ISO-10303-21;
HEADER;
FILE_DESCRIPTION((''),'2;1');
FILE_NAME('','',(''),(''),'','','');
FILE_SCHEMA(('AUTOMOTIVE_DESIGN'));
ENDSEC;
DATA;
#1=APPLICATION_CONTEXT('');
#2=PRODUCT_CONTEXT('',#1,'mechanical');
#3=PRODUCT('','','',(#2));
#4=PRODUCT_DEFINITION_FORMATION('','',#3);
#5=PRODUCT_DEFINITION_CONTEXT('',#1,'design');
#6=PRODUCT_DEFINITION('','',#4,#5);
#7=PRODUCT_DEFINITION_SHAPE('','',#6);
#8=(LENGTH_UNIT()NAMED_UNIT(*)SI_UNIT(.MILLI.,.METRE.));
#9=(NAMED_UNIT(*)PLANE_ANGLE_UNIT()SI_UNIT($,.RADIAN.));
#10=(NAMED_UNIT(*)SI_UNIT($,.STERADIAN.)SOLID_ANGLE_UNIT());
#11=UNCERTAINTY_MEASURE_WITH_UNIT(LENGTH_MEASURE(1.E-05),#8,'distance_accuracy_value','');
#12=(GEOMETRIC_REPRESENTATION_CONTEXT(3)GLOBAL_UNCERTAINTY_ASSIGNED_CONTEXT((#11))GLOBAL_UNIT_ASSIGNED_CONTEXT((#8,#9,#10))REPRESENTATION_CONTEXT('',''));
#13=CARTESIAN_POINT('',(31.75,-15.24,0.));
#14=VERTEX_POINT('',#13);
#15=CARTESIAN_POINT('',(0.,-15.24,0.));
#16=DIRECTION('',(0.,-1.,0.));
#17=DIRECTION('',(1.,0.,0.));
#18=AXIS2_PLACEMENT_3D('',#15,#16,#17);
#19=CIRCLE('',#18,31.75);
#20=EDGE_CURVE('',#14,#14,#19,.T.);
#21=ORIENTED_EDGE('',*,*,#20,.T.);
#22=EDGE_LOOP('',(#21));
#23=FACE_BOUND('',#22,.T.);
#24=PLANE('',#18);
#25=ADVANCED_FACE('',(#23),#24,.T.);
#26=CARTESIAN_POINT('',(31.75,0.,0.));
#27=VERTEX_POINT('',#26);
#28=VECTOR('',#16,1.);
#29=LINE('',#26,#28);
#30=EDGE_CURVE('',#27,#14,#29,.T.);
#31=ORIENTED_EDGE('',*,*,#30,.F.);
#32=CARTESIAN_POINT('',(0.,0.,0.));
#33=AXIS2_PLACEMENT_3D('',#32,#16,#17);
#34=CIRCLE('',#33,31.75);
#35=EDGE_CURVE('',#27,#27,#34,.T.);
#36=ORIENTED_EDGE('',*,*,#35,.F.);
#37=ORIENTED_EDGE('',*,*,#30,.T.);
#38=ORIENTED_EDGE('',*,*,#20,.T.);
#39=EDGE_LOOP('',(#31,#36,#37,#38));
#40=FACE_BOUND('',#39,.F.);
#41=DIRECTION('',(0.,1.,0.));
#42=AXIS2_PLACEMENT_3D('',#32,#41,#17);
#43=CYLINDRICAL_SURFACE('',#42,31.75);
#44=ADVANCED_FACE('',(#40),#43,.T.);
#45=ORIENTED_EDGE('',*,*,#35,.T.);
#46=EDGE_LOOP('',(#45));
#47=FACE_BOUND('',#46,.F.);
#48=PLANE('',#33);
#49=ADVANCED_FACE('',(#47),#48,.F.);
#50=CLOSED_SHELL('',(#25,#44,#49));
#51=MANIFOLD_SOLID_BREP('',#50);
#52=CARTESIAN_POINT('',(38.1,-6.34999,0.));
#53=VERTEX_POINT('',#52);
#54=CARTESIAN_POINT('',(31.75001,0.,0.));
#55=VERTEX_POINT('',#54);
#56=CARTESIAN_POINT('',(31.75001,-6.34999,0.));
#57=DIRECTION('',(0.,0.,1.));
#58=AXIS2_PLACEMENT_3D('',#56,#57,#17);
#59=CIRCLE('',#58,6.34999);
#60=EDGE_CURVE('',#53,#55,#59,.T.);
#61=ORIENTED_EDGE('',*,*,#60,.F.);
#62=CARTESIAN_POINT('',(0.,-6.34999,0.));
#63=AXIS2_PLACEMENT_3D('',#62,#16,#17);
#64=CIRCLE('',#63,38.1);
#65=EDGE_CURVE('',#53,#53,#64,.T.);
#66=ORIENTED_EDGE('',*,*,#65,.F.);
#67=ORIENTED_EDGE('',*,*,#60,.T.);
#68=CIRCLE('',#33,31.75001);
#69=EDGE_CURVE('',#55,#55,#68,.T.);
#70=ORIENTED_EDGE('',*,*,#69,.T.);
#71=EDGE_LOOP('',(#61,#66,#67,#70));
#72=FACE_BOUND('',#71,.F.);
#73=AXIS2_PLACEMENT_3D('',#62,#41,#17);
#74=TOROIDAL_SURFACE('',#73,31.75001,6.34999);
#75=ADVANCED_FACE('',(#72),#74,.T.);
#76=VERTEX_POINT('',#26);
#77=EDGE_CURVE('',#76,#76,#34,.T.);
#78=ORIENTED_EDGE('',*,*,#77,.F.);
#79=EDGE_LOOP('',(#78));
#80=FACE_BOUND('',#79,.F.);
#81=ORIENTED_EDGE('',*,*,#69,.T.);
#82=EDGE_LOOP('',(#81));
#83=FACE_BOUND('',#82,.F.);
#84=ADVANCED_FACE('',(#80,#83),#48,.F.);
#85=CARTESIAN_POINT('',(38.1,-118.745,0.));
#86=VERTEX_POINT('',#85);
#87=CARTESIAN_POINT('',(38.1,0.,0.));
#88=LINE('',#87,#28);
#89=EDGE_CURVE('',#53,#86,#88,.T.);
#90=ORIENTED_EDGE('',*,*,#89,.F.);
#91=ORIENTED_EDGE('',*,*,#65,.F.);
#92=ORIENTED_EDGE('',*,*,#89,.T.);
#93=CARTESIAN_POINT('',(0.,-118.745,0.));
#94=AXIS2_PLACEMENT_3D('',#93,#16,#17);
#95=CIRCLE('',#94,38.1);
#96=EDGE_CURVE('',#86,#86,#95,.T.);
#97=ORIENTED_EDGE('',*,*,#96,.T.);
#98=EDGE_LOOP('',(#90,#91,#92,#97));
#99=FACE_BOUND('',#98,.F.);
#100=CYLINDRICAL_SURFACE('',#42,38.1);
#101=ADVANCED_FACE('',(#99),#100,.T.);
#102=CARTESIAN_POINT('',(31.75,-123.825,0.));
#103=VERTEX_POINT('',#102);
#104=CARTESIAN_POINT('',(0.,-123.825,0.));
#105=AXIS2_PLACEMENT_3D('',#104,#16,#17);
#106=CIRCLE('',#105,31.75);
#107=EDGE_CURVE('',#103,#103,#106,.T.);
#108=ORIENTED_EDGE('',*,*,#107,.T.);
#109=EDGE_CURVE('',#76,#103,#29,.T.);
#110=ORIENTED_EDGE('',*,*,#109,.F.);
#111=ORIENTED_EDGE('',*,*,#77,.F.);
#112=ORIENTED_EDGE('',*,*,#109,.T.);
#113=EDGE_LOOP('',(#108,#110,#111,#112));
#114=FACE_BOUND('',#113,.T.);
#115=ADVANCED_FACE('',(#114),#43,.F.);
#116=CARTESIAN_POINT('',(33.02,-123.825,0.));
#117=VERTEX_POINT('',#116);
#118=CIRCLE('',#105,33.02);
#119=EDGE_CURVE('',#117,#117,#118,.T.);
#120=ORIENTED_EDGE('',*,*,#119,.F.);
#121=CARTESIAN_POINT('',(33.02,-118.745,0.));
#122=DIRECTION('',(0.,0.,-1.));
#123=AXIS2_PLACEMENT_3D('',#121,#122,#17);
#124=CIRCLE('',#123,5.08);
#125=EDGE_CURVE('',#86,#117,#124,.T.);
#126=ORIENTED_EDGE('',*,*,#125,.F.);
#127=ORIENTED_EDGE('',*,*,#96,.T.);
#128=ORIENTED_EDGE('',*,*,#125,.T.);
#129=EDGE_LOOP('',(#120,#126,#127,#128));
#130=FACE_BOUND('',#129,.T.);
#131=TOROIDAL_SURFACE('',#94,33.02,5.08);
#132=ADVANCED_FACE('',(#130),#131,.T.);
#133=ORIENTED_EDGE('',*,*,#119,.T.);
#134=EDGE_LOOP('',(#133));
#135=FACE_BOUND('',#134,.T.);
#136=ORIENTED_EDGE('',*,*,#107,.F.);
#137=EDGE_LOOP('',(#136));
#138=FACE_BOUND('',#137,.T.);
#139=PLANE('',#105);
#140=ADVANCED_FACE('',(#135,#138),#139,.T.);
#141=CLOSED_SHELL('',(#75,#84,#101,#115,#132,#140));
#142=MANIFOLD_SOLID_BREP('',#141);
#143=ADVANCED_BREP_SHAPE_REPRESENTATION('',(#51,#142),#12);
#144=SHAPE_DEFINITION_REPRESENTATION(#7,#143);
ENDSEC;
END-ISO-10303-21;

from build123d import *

# Parameters (mm, degrees)
F0_R     = 38.1
F0_R_2   = 31.75
F1_DEPTH = 123.825
F2_DEPTH = 15.24
F3_R     = 6.34999
F4_R     = 5.08


# Not quite as in the source:
# - a fillet or chamfer is up to 0.001 mm smaller than in the source, because OpenCascade refuses the exact size


with BuildPart() as f1:
    # F0 (on Front) → F1 (new body)
    with BuildSketch(Plane.XZ):
        Circle(F0_R)
        Circle(F0_R_2, mode=Mode.SUBTRACT)
    extrude(amount=F1_DEPTH)

    # F3 (radius 6.35 in the source; OpenCascade refuses exactly that, so slightly less here)
    f3_edges = [f1.edges().sort_by_distance(p)[0] for p in [
        (-38.1, 0, 0),
    ]]
    fillet(f3_edges, radius=F3_R)

    # F4
    f4_edges = [f1.edges().sort_by_distance(p)[0] for p in [
        (-38.1, -123.825, 0),
    ]]
    fillet(f4_edges, radius=F4_R)


with BuildPart() as f2:
    # F0 (on Front) → F2 (new body)
    with BuildSketch(Plane.XZ):
        Circle(F0_R_2)
    extrude(amount=F2_DEPTH)


solid = Compound([f1.part, f2.part])
